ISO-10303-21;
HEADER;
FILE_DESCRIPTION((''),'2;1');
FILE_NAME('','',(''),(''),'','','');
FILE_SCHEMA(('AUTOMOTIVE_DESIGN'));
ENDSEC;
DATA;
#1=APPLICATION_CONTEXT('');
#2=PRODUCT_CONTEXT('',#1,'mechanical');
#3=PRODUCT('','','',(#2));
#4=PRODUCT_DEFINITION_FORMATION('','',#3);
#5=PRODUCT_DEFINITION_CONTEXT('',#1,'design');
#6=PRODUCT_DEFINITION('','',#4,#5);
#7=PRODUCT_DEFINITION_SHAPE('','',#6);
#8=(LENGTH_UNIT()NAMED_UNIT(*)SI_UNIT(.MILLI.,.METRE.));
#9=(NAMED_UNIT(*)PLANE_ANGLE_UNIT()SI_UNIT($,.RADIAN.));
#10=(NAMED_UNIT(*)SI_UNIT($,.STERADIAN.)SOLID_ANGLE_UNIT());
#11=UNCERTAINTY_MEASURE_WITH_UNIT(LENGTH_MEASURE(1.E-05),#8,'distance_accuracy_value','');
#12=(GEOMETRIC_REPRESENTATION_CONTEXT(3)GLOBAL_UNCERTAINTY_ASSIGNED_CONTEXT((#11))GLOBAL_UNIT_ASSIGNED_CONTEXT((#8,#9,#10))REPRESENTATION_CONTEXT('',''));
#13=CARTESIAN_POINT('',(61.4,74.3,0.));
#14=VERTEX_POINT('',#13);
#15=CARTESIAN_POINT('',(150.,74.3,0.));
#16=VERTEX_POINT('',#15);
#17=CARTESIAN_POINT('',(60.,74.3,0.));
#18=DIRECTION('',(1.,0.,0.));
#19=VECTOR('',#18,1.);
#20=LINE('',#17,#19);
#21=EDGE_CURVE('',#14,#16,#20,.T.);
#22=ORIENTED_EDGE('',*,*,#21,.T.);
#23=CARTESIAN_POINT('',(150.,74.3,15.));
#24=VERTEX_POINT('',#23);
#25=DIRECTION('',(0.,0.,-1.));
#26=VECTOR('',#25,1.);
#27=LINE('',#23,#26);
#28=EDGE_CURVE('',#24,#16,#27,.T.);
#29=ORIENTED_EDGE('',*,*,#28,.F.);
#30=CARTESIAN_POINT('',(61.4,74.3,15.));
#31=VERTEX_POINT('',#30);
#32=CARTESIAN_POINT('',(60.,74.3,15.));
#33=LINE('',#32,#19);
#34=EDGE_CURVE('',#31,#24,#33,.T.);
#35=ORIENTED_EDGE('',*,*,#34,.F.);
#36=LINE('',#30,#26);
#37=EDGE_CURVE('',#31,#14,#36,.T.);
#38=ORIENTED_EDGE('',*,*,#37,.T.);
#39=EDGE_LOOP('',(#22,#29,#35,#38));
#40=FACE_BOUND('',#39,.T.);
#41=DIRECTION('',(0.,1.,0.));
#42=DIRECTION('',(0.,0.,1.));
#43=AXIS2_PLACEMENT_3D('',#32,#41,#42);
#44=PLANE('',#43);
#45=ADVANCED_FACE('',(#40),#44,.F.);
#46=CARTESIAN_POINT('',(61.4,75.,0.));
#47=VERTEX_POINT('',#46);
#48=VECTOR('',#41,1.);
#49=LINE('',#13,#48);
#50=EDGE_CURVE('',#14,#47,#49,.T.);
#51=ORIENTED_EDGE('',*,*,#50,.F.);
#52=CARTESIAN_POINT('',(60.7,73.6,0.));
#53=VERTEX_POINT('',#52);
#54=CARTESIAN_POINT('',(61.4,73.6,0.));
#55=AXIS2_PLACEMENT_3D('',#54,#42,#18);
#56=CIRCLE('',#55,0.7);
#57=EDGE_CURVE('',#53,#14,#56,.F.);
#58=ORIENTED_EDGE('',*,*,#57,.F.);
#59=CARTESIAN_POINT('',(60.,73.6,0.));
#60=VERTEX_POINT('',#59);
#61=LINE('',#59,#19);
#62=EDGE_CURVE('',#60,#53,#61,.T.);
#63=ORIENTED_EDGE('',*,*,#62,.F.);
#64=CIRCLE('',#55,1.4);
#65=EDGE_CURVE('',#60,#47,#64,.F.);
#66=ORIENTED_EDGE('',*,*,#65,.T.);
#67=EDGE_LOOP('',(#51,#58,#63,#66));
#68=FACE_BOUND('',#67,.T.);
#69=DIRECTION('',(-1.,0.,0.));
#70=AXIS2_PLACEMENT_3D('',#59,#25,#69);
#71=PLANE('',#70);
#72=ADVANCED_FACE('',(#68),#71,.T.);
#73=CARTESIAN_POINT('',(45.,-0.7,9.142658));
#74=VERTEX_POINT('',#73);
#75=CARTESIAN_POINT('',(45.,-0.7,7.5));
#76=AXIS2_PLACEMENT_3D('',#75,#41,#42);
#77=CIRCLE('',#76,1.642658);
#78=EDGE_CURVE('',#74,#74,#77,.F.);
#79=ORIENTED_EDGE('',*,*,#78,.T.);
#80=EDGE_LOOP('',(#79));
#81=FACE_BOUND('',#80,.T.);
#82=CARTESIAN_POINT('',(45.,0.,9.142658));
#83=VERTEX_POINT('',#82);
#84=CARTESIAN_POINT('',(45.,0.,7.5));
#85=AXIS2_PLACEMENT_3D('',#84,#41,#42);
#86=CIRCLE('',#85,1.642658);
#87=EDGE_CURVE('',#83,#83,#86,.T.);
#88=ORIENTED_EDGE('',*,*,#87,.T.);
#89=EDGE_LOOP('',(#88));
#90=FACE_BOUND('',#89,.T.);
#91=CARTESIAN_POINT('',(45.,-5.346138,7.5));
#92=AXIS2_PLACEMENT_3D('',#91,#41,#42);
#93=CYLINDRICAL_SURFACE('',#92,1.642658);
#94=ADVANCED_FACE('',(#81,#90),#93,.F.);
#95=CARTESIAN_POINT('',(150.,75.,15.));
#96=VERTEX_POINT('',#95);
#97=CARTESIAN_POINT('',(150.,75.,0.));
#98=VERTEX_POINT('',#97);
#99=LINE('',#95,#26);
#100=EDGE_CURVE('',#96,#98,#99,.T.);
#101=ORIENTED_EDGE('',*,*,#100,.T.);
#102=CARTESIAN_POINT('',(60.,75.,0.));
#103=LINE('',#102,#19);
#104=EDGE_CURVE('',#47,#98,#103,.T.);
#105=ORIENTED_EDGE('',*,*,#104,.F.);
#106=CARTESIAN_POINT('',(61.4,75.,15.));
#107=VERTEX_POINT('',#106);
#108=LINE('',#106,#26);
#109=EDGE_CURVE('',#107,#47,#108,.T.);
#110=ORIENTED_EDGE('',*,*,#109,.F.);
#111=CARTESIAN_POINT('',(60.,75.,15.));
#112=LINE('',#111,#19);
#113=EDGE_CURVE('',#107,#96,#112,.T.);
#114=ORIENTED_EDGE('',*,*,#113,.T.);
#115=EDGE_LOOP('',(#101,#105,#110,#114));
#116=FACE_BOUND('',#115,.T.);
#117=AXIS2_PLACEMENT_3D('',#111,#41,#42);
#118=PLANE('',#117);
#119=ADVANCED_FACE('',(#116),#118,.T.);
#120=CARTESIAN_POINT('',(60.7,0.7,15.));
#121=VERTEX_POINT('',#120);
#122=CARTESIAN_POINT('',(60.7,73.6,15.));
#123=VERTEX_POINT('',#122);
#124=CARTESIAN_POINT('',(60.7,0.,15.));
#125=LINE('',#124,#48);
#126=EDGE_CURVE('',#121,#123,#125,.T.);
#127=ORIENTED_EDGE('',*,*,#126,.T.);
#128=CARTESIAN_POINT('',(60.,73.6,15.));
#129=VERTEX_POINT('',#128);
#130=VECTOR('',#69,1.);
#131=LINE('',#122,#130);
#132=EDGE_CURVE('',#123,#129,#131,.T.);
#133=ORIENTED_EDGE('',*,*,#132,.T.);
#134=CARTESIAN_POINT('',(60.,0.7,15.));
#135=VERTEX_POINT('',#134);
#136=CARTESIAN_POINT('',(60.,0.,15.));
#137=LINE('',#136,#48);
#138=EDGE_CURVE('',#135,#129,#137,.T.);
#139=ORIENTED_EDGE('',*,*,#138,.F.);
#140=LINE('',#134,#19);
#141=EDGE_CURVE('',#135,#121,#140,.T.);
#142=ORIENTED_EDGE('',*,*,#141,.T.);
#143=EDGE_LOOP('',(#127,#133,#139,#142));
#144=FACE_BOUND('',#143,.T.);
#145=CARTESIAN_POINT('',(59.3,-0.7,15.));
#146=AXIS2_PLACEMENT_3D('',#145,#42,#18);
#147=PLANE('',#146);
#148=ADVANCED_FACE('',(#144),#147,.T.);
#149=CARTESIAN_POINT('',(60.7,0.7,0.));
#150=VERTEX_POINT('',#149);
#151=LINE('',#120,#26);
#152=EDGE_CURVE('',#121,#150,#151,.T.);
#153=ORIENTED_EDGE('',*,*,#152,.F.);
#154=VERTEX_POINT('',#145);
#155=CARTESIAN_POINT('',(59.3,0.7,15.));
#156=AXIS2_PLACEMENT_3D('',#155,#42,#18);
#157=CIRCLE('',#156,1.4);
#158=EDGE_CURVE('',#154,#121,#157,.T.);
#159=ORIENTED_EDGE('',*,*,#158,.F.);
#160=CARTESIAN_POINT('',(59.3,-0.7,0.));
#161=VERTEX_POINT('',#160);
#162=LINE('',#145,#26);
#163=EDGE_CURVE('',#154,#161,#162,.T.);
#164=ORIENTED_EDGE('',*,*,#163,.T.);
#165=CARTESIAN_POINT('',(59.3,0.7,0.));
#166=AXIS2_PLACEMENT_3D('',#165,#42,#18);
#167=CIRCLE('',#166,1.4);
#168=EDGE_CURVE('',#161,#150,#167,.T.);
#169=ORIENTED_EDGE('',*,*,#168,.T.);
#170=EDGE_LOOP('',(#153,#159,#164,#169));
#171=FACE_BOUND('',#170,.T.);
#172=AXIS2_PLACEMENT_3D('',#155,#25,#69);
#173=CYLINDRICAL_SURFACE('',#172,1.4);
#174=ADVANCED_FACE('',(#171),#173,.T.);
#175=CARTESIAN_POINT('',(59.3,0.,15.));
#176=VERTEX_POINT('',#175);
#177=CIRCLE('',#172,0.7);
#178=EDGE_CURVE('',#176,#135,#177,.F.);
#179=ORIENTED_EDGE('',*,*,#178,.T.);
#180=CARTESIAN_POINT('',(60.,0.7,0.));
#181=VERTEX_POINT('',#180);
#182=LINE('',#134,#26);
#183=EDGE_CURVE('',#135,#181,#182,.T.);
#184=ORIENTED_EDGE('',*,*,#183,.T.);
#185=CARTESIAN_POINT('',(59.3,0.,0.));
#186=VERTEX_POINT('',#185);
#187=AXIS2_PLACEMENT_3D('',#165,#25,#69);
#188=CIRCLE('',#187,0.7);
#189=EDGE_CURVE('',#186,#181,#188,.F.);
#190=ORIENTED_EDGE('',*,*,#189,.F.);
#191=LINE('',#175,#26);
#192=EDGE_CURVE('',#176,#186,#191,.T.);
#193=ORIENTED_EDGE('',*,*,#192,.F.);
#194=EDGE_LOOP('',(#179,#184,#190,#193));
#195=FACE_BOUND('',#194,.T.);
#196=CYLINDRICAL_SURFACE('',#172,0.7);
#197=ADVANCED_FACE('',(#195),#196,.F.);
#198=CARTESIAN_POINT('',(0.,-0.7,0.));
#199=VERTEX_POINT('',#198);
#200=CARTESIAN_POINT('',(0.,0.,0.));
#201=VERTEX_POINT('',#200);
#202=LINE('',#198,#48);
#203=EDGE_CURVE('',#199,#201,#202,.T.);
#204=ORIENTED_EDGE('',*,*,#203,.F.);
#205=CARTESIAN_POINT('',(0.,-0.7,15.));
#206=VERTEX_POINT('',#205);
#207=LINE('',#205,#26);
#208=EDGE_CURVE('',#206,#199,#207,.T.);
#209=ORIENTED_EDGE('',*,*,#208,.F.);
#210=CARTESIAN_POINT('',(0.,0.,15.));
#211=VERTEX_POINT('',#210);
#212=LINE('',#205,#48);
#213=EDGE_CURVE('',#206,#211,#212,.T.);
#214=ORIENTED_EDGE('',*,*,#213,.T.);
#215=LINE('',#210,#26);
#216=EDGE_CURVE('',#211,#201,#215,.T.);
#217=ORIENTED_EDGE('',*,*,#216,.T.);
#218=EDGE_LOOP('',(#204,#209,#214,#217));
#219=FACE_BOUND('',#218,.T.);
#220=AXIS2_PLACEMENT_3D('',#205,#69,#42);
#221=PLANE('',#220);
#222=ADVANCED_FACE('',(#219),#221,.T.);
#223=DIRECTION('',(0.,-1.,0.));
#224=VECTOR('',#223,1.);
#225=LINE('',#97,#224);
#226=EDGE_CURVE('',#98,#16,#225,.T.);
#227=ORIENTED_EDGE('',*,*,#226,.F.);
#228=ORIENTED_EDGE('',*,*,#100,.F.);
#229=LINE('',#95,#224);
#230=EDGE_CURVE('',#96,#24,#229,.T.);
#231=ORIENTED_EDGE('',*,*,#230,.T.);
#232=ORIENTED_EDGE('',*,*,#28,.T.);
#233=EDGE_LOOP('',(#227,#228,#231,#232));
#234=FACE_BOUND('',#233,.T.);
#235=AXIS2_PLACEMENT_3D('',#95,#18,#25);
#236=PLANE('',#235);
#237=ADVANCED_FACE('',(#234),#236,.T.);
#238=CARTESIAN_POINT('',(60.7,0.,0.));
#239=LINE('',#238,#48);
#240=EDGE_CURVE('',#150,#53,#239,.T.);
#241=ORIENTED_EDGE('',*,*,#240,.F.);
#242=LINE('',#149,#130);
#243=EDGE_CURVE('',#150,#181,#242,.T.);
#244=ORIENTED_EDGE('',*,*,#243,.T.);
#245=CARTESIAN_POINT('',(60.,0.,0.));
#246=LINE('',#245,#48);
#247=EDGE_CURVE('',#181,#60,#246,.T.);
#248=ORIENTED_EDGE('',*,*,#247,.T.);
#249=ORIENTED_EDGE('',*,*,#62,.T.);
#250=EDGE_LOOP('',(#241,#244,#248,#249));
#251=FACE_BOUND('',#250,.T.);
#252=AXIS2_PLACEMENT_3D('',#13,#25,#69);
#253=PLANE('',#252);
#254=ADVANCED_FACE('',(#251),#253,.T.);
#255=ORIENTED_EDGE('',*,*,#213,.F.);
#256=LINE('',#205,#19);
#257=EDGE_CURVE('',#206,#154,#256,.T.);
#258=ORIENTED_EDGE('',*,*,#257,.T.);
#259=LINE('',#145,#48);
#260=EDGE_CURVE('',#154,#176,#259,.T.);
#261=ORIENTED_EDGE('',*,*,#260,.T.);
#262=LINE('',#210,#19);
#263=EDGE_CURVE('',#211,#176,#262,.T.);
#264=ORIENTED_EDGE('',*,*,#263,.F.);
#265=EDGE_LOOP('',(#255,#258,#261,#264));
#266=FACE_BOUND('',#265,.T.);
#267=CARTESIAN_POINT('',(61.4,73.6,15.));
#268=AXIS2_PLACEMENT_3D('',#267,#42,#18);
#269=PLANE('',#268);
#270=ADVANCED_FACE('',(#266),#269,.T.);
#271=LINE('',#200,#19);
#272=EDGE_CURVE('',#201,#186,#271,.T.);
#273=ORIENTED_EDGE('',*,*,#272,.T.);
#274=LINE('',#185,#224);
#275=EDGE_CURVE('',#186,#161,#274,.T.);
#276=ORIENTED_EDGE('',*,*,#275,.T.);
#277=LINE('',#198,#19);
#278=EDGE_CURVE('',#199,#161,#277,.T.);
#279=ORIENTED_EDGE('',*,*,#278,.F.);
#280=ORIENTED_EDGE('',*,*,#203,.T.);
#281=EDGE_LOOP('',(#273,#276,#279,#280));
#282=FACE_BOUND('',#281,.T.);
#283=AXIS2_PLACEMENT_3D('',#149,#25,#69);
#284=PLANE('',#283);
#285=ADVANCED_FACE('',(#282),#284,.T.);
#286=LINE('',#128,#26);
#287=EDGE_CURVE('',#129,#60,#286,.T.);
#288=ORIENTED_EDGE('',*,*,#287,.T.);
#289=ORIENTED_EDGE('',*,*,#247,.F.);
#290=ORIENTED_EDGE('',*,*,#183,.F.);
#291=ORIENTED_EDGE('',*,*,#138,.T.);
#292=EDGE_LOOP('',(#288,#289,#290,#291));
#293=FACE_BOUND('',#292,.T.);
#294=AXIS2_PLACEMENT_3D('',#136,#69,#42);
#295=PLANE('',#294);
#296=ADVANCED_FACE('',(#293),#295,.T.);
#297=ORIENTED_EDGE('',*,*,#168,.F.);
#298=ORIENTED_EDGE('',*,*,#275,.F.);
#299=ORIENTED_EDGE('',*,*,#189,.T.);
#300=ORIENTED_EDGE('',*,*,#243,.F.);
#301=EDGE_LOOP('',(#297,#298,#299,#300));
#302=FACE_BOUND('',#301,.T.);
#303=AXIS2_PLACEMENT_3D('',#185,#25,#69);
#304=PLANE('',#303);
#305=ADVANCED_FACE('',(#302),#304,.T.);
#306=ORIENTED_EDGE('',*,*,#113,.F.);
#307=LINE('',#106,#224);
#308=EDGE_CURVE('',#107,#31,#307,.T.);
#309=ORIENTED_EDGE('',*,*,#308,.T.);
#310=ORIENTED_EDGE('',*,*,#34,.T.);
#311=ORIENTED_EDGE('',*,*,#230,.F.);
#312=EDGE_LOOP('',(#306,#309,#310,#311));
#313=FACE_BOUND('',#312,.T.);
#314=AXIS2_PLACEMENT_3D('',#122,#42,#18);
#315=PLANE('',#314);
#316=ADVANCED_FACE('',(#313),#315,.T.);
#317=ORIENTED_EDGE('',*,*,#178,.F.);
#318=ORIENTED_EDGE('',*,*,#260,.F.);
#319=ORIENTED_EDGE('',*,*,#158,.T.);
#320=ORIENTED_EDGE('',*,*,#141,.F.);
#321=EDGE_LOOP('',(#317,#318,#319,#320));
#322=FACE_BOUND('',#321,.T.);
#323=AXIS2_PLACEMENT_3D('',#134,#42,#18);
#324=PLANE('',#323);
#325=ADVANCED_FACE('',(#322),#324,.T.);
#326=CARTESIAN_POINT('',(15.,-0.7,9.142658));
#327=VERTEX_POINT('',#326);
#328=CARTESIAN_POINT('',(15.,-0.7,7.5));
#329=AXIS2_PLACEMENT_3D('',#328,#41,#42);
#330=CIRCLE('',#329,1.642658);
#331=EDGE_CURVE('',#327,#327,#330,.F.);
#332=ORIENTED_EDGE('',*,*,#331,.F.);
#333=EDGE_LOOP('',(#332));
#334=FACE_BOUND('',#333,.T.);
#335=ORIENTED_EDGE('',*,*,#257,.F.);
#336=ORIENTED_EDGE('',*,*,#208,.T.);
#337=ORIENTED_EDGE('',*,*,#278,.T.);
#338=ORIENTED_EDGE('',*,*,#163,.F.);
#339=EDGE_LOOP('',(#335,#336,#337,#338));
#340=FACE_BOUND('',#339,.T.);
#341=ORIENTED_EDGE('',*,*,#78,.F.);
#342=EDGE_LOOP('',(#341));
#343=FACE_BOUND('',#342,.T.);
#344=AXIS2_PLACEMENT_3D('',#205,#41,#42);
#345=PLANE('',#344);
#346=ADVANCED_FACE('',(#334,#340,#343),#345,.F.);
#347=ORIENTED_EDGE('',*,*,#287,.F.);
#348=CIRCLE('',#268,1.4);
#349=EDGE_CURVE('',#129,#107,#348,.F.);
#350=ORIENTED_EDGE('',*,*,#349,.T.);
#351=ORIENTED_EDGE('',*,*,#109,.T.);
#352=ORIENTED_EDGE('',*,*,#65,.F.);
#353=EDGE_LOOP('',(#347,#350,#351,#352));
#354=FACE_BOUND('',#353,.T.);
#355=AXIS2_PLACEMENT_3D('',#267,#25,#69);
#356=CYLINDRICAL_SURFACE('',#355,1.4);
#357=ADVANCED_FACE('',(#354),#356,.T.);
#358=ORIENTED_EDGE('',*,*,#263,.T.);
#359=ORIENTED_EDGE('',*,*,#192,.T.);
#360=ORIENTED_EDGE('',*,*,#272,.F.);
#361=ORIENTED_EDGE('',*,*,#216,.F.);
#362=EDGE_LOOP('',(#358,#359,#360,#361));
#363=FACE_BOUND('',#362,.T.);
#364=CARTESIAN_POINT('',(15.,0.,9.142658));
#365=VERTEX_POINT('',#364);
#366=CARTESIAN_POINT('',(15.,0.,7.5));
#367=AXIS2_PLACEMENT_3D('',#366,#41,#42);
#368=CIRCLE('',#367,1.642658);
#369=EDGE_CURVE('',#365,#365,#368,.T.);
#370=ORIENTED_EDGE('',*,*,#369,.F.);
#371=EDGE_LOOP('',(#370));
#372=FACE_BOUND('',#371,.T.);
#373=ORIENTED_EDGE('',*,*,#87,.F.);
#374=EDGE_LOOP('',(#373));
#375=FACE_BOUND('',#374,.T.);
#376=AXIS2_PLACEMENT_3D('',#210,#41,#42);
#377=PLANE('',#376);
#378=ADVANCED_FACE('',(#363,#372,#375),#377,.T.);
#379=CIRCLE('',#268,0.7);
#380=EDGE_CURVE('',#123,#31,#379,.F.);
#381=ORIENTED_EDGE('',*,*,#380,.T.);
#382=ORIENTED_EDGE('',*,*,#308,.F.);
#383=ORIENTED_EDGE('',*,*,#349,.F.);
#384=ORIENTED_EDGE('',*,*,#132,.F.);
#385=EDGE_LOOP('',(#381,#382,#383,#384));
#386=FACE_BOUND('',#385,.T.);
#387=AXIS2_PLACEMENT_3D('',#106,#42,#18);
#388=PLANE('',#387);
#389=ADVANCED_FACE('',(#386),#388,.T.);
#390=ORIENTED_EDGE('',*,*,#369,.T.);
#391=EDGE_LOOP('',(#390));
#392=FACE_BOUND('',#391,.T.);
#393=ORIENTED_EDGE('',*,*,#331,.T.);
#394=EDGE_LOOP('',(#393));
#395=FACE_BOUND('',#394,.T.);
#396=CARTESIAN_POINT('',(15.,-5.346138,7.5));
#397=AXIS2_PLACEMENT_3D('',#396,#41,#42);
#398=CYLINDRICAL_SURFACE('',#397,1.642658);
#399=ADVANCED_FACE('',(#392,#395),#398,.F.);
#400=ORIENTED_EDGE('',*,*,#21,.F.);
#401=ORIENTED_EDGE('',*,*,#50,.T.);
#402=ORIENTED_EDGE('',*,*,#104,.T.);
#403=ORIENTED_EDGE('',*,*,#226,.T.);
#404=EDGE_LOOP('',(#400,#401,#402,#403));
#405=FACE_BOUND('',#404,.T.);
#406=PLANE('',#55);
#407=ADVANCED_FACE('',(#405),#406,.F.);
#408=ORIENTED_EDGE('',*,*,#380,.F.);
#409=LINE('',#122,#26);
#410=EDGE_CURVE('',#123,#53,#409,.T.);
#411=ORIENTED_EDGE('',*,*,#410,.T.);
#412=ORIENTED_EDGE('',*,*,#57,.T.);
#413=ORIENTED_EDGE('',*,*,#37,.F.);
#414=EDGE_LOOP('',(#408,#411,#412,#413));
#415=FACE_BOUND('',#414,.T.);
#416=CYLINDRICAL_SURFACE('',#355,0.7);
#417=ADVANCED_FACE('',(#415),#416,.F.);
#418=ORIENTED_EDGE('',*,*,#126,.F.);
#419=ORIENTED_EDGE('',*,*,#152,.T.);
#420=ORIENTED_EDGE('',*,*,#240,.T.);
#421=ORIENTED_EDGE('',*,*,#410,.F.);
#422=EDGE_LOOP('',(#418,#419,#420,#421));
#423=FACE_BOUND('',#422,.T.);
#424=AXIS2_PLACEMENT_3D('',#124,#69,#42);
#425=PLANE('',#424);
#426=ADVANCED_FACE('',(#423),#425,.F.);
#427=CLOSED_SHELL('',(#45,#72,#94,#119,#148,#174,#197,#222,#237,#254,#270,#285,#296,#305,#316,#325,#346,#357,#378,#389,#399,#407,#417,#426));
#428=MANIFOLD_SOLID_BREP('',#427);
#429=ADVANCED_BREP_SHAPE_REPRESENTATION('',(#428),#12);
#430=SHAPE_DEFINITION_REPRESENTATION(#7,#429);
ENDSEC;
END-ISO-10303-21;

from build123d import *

# Parameters (mm, degrees)
BASE_FLANGE1_DEPTH = 15
SKETCH6_R          = 1.64265796
CUT_EXTRUDE1_DEPTH = 0.7


# Sheet-metal steps are written as plain solids
with BuildPart() as part:
    # Sketch1 → Base-Flange1 (new body)
    with BuildSketch(Plane.XY):
        with BuildLine():
            Line((0, 0), (59.3, 0))
            ThreePointArc((59.3, 0), (59.794974747, 0.205025253), (60, 0.7))
            Line((60, 0.7), (60, 73.6))
            ThreePointArc((60, 73.6), (60.410050506, 74.589949494), (61.4, 75))
            Line((61.4, 75), (150, 75))
            Line((150, 75), (150, 74.3))
            Line((150, 74.3), (61.4, 74.3))
            ThreePointArc((61.4, 74.3), (60.905025253, 74.094974747), (60.7, 73.6))
            Line((60.7, 73.6), (60.7, 0.7))
            ThreePointArc((60.7, 0.7), (60.289949494, -0.289949494), (59.3, -0.7))
            Line((59.3, -0.7), (0, -0.7))
            Line((0, -0.7), (0, 0))
        make_face()
    extrude(amount=BASE_FLANGE1_DEPTH)

    # Sketch6 → Cut-Extrude1 (cut)
    with BuildSketch(Plane(origin=(0, 0, 0), x_dir=(1, 0, 0), z_dir=(0, 1, 0))):
        with Locations(Location((15, -7.5, 0), (0, 0, 270))):
            Circle(SKETCH6_R)
        with Locations(Location((45, -7.5, 0), (0, 0, 270))):
            Circle(SKETCH6_R)
    extrude(amount=-CUT_EXTRUDE1_DEPTH, mode=Mode.SUBTRACT)


solid = part.part
